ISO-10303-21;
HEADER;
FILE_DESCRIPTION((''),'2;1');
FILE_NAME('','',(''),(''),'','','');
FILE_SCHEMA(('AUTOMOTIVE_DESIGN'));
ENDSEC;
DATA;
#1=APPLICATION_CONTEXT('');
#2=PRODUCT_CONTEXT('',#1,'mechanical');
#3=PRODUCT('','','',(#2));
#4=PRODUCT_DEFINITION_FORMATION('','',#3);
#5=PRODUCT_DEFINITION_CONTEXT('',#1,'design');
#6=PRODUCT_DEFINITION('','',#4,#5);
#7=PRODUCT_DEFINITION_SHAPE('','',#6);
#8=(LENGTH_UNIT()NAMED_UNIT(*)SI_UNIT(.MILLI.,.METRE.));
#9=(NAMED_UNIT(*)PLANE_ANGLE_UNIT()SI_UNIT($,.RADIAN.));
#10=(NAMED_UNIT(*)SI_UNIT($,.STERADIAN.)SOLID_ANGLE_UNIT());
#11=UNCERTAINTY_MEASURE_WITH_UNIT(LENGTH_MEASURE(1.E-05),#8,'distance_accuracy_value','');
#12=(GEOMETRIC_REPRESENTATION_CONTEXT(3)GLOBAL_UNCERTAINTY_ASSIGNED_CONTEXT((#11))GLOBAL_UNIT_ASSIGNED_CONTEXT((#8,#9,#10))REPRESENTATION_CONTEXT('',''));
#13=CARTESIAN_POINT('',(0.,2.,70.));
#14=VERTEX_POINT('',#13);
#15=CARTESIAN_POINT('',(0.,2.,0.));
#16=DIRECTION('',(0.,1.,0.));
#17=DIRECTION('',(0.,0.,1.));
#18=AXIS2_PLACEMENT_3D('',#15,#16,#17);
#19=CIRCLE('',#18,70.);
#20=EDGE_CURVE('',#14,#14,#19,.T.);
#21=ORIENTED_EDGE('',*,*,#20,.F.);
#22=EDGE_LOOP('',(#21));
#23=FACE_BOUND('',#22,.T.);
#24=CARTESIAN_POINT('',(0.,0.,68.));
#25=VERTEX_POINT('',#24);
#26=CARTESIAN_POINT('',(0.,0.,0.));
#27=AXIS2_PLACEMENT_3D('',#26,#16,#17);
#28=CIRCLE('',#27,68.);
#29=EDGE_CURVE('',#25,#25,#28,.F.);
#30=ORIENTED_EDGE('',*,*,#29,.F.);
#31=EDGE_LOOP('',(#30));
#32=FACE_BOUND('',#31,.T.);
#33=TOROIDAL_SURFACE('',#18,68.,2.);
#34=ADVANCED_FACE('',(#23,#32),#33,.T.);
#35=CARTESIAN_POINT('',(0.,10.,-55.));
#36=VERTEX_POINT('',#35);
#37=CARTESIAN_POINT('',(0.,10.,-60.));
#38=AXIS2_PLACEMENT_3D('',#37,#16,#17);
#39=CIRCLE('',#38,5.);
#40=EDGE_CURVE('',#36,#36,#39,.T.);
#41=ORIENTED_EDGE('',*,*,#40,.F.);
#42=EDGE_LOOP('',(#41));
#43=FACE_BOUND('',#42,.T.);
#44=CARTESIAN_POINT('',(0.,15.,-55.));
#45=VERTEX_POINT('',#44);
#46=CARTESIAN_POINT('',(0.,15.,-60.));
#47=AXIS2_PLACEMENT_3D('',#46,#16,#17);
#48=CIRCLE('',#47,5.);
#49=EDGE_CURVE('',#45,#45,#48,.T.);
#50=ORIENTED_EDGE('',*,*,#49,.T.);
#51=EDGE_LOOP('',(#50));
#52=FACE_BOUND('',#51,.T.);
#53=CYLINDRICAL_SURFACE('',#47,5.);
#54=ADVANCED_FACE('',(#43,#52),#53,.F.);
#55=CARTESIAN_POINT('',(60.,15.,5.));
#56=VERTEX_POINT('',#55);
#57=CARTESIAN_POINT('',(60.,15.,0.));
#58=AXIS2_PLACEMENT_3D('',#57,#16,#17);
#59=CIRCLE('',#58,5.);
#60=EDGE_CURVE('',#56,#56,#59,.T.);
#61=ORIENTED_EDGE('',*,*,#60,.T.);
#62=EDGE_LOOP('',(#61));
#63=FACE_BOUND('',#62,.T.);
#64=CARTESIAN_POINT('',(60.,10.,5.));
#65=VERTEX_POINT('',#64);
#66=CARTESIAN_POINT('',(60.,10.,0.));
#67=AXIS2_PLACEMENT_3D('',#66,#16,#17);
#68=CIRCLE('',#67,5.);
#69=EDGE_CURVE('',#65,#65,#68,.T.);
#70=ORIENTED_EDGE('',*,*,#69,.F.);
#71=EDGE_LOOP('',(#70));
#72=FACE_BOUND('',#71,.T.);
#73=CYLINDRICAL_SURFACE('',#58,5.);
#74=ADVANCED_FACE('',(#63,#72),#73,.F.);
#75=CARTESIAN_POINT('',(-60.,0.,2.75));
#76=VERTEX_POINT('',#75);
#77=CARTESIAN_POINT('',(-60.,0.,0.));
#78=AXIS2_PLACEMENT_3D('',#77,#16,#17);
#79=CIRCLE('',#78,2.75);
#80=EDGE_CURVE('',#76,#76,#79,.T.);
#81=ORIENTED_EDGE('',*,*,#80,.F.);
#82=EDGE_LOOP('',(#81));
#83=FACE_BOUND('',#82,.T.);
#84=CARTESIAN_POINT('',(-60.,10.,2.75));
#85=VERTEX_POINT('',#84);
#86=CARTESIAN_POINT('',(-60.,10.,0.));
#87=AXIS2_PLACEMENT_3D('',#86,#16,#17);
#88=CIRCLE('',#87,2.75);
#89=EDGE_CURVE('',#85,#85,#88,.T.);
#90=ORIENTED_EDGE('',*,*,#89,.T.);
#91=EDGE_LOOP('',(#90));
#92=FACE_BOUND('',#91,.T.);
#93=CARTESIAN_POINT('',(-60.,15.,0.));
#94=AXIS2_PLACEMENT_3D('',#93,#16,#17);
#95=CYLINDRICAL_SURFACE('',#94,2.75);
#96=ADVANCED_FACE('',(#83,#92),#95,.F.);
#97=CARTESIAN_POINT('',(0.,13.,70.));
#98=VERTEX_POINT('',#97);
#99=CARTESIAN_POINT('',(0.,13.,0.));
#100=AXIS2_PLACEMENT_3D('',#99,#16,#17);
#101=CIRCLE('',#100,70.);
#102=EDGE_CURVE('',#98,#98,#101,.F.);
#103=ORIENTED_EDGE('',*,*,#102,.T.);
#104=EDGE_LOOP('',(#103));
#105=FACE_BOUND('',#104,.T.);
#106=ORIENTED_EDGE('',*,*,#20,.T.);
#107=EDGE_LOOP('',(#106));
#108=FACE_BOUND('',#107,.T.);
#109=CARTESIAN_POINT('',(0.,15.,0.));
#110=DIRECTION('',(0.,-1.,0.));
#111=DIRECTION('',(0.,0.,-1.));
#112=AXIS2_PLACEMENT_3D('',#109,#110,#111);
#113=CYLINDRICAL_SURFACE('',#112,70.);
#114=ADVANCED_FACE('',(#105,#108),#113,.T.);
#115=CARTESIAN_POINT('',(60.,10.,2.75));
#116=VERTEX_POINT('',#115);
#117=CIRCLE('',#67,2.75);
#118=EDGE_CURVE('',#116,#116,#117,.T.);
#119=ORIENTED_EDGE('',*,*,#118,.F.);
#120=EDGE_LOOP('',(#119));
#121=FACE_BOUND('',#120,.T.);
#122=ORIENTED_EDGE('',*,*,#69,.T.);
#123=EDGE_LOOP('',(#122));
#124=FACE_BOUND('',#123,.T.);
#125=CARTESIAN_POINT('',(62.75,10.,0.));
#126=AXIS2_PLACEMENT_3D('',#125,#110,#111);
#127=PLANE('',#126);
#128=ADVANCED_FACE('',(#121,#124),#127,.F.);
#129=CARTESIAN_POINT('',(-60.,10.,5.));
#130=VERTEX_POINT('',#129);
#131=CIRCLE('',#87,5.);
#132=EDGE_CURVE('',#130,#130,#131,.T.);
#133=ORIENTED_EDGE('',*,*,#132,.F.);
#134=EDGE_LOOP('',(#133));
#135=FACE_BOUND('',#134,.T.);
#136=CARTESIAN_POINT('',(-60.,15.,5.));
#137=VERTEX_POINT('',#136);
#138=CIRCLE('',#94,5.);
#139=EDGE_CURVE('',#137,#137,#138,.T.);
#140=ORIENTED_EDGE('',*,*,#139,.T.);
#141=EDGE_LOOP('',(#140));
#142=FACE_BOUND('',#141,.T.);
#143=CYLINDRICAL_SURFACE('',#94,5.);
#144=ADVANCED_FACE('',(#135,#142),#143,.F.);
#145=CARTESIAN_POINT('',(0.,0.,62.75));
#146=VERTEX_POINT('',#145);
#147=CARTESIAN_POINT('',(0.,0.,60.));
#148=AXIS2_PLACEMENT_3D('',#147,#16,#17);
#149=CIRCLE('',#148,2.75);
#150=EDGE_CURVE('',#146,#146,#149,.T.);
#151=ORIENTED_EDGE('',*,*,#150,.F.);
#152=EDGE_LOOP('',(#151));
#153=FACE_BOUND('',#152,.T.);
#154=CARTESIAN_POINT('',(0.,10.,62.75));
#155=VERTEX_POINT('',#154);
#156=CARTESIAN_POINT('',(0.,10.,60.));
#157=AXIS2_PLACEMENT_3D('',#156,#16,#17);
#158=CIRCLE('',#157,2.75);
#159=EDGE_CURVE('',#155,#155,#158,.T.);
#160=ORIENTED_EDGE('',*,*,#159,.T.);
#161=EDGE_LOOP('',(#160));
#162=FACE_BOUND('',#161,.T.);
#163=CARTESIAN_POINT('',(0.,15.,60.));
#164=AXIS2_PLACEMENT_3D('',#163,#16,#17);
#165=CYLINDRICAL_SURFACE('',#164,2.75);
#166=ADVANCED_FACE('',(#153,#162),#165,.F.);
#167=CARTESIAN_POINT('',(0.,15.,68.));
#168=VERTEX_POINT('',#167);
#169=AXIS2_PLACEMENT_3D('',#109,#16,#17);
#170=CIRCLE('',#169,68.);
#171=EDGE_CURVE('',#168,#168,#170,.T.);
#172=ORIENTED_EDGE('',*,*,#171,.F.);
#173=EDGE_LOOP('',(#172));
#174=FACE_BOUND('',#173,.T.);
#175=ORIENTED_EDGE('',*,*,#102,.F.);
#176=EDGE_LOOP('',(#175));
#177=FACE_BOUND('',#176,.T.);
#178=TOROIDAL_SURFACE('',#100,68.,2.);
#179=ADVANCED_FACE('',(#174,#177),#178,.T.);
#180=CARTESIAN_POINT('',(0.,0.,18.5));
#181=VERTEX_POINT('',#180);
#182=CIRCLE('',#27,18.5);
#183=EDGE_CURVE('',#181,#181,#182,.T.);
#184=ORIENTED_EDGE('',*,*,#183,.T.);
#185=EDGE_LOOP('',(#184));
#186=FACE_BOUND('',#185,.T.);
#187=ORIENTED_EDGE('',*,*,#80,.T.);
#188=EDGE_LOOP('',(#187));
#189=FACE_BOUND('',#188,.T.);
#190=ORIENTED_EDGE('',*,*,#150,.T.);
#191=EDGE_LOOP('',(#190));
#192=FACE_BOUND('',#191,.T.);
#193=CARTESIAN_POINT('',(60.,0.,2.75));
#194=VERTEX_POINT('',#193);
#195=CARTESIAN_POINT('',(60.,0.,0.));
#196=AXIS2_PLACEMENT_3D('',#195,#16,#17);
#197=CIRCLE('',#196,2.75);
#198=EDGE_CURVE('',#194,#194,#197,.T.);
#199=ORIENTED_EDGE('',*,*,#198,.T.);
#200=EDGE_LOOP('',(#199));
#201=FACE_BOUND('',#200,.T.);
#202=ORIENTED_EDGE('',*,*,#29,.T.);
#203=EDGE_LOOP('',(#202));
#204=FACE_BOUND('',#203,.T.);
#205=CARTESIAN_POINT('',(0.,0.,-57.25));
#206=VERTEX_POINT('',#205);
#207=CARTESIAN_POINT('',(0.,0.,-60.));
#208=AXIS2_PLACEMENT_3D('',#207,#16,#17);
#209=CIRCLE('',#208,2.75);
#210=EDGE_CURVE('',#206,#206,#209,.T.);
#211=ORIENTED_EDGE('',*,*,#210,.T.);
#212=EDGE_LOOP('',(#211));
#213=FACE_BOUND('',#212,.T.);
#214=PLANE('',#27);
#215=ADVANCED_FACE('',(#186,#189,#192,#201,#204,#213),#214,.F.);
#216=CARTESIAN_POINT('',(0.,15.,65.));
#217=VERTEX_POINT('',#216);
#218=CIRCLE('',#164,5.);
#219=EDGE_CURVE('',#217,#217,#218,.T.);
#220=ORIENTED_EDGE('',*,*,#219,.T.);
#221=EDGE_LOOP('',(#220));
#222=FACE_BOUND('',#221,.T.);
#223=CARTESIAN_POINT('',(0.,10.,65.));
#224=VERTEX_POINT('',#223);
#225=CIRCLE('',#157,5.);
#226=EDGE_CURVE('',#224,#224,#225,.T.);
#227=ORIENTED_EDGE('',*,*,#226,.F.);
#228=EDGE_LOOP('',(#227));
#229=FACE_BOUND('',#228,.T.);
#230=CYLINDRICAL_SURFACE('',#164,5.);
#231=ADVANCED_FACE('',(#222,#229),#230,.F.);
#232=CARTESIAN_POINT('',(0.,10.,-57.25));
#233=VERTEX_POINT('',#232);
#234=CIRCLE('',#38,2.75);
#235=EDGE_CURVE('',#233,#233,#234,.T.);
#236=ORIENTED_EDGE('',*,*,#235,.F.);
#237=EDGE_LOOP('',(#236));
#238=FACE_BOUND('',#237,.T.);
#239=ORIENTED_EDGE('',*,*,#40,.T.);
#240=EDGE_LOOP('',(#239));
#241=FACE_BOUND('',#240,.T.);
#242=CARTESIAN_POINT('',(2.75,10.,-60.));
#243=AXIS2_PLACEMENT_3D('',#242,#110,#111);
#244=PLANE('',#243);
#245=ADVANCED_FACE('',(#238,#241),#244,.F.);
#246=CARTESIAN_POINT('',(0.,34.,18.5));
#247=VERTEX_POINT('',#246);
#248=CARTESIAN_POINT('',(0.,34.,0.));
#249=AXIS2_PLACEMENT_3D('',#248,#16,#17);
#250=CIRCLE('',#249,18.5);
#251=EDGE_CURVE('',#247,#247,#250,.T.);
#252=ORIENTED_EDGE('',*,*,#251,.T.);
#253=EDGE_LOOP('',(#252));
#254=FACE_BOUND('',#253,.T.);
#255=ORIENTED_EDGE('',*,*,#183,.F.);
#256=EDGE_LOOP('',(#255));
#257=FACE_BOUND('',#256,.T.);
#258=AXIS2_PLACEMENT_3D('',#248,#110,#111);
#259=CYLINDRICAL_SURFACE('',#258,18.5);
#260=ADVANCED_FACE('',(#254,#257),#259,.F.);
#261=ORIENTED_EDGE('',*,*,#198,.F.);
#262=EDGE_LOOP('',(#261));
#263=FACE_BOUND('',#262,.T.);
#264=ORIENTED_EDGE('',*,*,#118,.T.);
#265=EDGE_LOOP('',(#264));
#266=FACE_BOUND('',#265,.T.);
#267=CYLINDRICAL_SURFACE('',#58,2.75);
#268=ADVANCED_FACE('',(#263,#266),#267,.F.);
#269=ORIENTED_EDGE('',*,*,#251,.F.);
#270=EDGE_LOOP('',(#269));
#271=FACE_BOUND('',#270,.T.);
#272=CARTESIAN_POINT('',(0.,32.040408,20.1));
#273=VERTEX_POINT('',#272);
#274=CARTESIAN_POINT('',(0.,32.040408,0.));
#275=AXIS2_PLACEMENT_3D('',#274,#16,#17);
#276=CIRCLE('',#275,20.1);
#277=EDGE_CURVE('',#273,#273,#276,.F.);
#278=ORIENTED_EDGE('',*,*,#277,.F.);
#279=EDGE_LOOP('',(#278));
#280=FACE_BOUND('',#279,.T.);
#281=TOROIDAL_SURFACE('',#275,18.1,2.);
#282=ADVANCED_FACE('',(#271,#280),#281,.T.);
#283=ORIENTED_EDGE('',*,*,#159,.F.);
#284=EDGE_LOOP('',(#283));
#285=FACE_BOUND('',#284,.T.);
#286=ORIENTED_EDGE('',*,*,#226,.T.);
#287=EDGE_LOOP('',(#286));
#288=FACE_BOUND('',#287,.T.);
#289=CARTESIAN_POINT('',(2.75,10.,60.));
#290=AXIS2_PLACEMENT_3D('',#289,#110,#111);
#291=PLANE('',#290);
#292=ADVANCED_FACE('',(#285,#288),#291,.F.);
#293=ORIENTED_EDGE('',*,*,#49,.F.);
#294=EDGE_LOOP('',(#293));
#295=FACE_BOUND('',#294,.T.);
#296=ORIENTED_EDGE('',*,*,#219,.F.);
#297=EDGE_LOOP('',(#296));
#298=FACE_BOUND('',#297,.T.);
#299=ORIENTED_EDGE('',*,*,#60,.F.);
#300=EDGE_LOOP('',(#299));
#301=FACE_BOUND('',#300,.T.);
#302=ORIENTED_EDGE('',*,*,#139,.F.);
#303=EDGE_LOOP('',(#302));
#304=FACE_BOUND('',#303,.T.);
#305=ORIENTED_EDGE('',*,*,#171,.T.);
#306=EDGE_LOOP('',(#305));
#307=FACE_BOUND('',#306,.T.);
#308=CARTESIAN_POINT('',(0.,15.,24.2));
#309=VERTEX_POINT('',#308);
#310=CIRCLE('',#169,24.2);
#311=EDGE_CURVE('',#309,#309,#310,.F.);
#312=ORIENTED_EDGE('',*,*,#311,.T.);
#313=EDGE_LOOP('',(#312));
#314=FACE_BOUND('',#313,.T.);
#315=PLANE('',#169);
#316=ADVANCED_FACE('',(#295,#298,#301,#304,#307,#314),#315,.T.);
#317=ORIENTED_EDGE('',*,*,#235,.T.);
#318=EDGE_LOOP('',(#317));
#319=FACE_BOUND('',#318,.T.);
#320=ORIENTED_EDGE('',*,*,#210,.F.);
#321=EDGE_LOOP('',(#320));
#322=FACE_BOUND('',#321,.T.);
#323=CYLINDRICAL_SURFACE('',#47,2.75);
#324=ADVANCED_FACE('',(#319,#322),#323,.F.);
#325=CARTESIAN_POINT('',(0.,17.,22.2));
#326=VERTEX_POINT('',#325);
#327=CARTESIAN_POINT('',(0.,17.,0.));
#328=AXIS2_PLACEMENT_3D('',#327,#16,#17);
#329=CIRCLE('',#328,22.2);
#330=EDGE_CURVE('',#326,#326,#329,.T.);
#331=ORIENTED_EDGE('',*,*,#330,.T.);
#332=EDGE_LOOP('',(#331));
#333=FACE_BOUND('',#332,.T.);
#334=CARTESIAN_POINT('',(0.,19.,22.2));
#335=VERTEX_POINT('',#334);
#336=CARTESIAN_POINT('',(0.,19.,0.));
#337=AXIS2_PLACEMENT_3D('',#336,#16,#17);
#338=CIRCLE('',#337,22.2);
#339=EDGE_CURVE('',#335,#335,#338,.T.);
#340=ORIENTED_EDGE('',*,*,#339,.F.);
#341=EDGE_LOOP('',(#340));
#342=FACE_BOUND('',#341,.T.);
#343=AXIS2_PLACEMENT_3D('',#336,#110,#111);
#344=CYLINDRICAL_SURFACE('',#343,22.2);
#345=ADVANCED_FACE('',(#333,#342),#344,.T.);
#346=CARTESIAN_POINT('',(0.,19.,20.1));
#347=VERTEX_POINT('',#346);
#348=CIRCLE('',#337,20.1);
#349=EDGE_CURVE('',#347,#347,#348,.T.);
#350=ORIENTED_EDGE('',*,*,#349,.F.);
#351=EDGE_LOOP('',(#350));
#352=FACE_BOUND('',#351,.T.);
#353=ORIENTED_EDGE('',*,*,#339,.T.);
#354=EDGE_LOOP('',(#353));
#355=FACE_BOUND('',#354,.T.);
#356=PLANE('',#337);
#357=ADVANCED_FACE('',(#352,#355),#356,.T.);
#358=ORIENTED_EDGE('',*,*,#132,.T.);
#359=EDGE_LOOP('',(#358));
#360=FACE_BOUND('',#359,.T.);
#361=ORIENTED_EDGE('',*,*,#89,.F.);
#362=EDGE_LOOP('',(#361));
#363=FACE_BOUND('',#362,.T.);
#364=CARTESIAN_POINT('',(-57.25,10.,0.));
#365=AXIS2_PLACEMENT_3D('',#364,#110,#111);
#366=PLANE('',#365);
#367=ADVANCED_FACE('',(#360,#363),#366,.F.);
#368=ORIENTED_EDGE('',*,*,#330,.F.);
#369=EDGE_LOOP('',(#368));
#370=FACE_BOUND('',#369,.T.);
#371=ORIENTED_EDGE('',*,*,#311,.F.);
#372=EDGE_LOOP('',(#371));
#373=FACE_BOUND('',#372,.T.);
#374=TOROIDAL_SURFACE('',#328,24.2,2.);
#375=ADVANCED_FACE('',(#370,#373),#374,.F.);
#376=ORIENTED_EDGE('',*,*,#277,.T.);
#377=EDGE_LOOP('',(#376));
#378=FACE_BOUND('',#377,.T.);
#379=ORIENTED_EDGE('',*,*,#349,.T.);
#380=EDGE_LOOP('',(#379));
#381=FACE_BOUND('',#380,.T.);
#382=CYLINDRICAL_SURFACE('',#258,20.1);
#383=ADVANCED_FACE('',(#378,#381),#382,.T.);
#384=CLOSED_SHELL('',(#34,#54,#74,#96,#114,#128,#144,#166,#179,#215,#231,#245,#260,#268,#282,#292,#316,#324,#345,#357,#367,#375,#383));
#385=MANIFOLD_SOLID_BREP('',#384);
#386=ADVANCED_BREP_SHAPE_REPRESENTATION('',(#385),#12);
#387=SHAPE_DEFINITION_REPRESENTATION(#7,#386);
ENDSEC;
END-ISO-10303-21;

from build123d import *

# Parameters (mm, degrees)
SKETCH2_R                      = 70
BOSS_EXTRUDE1_DEPTH            = 15
CBORE_FOR_M5_SHCS1_D           = 5.5
CBORE_FOR_M5_SHCS1_CBORE_D     = 10
CBORE_FOR_M5_SHCS1_CBORE_DEPTH = 5
SKETCH23_R                     = 20.1
SKETCH23_R_2                   = 18.5
BOSS_EXTRUDE2_DEPTH            = 19
SKETCH24_R                     = 18.5
CUT_EXTRUDE4_DEPTH             = 101.801785698
SKETCH25_R                     = 22.2
SKETCH25_R_2                   = 20.1
BOSS_EXTRUDE3_DEPTH            = 4
FILLET2_R                      = 2


with BuildPart() as part:
    # Sketch2 → Boss-Extrude1 (new body)
    with BuildSketch(Plane(origin=(0, 0, 0), x_dir=(1, 0, 0), z_dir=(0, 1, 0))):
        with Locations(Location((0, 0, 0), (0, 0, 270))):
            Circle(SKETCH2_R)
    extrude(amount=BOSS_EXTRUDE1_DEPTH)

    # CBORE for M5 SHCS1 (through all)
    with Locations(Plane(origin=(0, 15, 0), x_dir=(1, 0, 0), z_dir=(0, 1, 0))):
        with Locations((0, 60), (60, 0), (-60, 0), (0, -60)):
            CounterBoreHole(CBORE_FOR_M5_SHCS1_D / 2, CBORE_FOR_M5_SHCS1_CBORE_D / 2, CBORE_FOR_M5_SHCS1_CBORE_DEPTH)

    # Sketch23 → Boss-Extrude2 (add)
    with BuildSketch(Plane(origin=(0, 15, 0), x_dir=(1, 0, 0), z_dir=(0, 1, 0))):
        with Locations(Location((0, 0, 0), (0, 0, 270))):
            Circle(SKETCH23_R)
        with Locations(Location((0, 0, 0), (0, 0, 270))):
            Circle(SKETCH23_R_2, mode=Mode.SUBTRACT)
    extrude(amount=BOSS_EXTRUDE2_DEPTH)

    # Sketch24 → Cut-Extrude4 (cut, through all)
    with BuildSketch(Plane(origin=(0, 15, 0), x_dir=(1, 0, 0), z_dir=(0, 1, 0))):
        with Locations(Location((0, 0, 0), (0, 0, 270))):
            Circle(SKETCH24_R)
    extrude(amount=-CUT_EXTRUDE4_DEPTH, mode=Mode.SUBTRACT)

    # Sketch25 → Boss-Extrude3 (add)
    with BuildSketch(Plane(origin=(0, 15, 0), x_dir=(1, 0, 0), z_dir=(0, 1, 0))):
        with Locations(Location((0, 0, 0), (0, 0, 270))):
            Circle(SKETCH25_R)
        with Locations(Location((0, 0, 0), (0, 0, 270))):
            Circle(SKETCH25_R_2, mode=Mode.SUBTRACT)
    extrude(amount=BOSS_EXTRUDE3_DEPTH)

    # Fillet2
    # the kernel refuses this fillet: 2 mm, written as the material it adds along each edge
    with BuildSketch(Plane(origin=(0, 15, 0), x_dir=(0, 0, 1), z_dir=(-1, 0, 0))) as fillet2_piece_1:
        with BuildLine():
            CenterArc((22.2 + FILLET2_R, FILLET2_R), FILLET2_R, 180, 90)
            Line((22.2, FILLET2_R), (22.2, 0))
            Line((22.2, 0), (22.2 + FILLET2_R, 0))
        make_face()
    revolve(axis=Axis((0, 15, 0), (0, 1, 0)))
    # the kernel refuses this fillet: 2 mm, written as the material it takes off along each edge
    with BuildSketch(Plane(origin=(0, 0, 0), x_dir=(0, 0, 1), z_dir=(-1, 0, 0))) as fillet2_2_piece_1:
        with BuildLine():
            CenterArc((70 - FILLET2_R, FILLET2_R), FILLET2_R, 270, 90)
            Line((70 - FILLET2_R, 0), (70, 0))
            Line((70, 0), (70, FILLET2_R))
        make_face()
    revolve(axis=Axis((0, 0, 0), (0, 1, 0)), mode=Mode.SUBTRACT)
    with BuildSketch(Plane(origin=(0, 34, 0), x_dir=(0, 0, 1), z_dir=(-1, 0, 0))) as fillet2_2_piece_2:
        with BuildLine():
            CenterArc((18.1, -1.959591794), FILLET2_R, 0, 78.463040967)
            Line((20.1, -1.959591794), (20.1, 0))
            Line((20.1, 0), (18.5, 0))
        make_face()
    revolve(axis=Axis((0, 34, 0), (0, 1, 0)), mode=Mode.SUBTRACT)
    with BuildSketch(Plane(origin=(0, 15, 0), x_dir=(0, 0, 1), z_dir=(-1, 0, 0))) as fillet2_2_piece_3:
        with BuildLine():
            CenterArc((70 - FILLET2_R, -FILLET2_R), FILLET2_R, 0, 90)
            Line((70 - FILLET2_R, 0), (70, 0))
            Line((70, 0), (70, -FILLET2_R))
        make_face()
    revolve(axis=Axis((0, 15, 0), (0, 1, 0)), mode=Mode.SUBTRACT)


solid = part.part
